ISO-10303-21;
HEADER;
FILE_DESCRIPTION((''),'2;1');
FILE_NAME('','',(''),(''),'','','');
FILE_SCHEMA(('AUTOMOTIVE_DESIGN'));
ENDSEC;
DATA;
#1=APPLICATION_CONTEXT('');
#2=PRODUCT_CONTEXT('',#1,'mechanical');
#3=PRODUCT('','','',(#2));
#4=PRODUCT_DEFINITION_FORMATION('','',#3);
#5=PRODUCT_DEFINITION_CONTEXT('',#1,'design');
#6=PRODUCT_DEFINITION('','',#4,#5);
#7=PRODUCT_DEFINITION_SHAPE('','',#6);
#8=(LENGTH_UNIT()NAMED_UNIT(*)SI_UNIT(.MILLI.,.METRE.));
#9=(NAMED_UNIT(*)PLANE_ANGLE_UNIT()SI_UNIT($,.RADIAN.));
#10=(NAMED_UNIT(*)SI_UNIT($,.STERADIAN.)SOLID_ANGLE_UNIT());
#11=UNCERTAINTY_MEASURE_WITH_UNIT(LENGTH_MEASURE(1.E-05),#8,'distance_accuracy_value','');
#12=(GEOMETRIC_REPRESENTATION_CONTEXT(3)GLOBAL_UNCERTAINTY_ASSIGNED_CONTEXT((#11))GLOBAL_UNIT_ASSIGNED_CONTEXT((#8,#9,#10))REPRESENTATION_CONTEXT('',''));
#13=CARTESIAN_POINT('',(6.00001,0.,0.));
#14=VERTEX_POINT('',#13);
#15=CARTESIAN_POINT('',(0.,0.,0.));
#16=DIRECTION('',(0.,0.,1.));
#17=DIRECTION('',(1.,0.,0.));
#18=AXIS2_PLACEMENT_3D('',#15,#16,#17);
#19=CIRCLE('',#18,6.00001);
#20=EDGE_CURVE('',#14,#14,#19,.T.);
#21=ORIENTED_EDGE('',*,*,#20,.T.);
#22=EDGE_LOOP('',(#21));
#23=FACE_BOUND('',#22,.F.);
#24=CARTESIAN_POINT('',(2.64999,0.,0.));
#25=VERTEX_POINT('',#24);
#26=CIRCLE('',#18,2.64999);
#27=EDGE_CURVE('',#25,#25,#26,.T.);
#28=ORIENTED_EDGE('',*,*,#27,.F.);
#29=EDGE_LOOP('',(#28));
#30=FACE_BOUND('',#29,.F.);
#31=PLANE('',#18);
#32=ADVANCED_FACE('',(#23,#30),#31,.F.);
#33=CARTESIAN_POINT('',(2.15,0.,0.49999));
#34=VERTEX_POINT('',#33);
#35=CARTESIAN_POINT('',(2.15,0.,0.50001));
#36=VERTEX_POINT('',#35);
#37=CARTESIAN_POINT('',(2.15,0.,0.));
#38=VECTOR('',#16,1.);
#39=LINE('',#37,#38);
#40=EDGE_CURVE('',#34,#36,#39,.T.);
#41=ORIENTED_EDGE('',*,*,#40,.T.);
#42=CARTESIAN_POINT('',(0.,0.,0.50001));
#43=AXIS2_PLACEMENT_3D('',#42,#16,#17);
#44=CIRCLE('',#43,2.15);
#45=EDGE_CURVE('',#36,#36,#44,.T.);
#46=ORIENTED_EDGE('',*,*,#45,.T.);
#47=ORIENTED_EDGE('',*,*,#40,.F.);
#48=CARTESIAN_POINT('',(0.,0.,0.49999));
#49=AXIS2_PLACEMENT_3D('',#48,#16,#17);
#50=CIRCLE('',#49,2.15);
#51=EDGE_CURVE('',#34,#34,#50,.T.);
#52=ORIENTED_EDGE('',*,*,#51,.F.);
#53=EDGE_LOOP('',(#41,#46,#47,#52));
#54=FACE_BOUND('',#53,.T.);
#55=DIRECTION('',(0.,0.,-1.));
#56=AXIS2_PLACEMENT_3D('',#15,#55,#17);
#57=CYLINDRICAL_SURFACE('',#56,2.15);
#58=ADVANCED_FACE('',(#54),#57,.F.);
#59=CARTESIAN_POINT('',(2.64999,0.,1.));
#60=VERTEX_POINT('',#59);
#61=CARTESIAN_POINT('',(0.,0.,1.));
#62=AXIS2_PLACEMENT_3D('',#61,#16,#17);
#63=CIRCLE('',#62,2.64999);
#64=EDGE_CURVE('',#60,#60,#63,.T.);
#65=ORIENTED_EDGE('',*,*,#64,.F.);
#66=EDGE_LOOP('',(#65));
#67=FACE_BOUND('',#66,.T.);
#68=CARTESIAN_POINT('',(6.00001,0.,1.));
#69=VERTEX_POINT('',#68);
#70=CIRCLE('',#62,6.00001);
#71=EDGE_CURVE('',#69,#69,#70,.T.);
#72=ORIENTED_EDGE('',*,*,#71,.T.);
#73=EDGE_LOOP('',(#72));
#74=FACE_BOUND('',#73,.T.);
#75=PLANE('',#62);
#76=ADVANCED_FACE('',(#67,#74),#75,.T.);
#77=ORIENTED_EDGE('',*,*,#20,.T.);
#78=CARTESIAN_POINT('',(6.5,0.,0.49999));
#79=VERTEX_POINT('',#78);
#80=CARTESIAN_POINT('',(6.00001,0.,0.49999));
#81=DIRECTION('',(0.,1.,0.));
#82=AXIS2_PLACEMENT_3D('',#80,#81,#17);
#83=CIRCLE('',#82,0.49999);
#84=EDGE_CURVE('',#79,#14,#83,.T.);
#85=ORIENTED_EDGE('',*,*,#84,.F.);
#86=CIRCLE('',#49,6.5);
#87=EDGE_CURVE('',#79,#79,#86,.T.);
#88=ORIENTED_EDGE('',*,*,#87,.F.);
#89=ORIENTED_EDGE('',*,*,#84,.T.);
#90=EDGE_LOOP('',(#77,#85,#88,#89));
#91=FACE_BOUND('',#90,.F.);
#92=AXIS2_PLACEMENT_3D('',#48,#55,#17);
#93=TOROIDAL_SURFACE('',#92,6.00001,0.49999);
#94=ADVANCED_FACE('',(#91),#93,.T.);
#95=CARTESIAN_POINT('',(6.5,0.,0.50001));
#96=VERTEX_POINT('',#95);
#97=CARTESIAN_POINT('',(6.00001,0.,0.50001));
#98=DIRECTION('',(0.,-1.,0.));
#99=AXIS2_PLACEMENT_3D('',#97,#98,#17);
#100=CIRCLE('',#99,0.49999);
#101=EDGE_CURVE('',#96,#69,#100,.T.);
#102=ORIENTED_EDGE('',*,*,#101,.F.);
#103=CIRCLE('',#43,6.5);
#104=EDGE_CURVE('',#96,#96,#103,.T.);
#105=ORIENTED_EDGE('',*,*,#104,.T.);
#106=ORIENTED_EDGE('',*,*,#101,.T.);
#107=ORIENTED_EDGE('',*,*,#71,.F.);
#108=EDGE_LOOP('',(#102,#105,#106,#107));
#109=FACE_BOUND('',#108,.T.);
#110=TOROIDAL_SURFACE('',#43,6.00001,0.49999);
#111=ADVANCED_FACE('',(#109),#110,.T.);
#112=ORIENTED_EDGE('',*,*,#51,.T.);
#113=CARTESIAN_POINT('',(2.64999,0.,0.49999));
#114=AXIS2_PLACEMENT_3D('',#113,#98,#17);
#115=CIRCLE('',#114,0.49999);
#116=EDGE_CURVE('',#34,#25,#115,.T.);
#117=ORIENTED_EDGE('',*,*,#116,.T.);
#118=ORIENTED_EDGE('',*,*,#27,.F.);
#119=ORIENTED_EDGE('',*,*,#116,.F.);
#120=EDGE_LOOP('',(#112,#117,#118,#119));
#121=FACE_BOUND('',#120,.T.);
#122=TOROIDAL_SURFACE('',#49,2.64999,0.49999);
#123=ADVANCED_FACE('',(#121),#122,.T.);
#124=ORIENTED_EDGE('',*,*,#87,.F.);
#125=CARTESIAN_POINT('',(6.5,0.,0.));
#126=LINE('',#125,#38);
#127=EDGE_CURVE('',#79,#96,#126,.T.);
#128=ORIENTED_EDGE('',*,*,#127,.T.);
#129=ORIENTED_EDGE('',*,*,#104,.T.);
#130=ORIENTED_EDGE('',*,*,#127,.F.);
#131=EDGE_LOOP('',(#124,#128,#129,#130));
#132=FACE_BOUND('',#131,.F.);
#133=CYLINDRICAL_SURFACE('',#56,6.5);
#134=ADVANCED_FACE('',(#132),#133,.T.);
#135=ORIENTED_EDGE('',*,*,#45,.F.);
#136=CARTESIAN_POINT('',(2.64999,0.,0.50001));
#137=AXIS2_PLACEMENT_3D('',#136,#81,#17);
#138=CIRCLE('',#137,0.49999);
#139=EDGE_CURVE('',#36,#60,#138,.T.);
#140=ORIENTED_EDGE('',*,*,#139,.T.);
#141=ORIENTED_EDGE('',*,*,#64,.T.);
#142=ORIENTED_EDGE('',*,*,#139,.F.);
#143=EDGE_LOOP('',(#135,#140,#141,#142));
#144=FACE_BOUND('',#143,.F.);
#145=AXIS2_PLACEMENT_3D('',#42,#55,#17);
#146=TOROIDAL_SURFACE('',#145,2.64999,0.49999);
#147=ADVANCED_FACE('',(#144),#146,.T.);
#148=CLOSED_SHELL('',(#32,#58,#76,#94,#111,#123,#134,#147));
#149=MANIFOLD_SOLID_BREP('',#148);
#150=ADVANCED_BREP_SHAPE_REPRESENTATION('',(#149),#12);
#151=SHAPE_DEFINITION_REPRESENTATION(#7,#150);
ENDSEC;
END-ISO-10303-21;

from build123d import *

# Parameters (mm, degrees)
F0_R     = 6.5
F0_R_2   = 2.15
F1_DEPTH = 1
F2_R     = 0.49999


# Not quite as in the source:
# - a fillet or chamfer is up to 0.001 mm smaller than in the source, because OpenCascade refuses the exact size


with BuildPart() as f1:
    # F0 (on Top) → F1 (new body)
    with BuildSketch(Plane.XY):
        Circle(F0_R)
        Circle(F0_R_2, mode=Mode.SUBTRACT)
    extrude(amount=F1_DEPTH)

    # F2 (radius 0.5 in the source; OpenCascade refuses exactly that, so slightly less here)
    f2_edges = [f1.edges().sort_by_distance(p)[0] for p in [
        (-6.5, 0, 1),
        (-2.15, 0, 1),
        (6.5, 0, 0.5),
        (-6.5, 0, 0),
        (-2.15, 0, 0),
        (2.15, 0, 0.5),
    ]]
    fillet(f2_edges, radius=F2_R)


solid = f1.part
